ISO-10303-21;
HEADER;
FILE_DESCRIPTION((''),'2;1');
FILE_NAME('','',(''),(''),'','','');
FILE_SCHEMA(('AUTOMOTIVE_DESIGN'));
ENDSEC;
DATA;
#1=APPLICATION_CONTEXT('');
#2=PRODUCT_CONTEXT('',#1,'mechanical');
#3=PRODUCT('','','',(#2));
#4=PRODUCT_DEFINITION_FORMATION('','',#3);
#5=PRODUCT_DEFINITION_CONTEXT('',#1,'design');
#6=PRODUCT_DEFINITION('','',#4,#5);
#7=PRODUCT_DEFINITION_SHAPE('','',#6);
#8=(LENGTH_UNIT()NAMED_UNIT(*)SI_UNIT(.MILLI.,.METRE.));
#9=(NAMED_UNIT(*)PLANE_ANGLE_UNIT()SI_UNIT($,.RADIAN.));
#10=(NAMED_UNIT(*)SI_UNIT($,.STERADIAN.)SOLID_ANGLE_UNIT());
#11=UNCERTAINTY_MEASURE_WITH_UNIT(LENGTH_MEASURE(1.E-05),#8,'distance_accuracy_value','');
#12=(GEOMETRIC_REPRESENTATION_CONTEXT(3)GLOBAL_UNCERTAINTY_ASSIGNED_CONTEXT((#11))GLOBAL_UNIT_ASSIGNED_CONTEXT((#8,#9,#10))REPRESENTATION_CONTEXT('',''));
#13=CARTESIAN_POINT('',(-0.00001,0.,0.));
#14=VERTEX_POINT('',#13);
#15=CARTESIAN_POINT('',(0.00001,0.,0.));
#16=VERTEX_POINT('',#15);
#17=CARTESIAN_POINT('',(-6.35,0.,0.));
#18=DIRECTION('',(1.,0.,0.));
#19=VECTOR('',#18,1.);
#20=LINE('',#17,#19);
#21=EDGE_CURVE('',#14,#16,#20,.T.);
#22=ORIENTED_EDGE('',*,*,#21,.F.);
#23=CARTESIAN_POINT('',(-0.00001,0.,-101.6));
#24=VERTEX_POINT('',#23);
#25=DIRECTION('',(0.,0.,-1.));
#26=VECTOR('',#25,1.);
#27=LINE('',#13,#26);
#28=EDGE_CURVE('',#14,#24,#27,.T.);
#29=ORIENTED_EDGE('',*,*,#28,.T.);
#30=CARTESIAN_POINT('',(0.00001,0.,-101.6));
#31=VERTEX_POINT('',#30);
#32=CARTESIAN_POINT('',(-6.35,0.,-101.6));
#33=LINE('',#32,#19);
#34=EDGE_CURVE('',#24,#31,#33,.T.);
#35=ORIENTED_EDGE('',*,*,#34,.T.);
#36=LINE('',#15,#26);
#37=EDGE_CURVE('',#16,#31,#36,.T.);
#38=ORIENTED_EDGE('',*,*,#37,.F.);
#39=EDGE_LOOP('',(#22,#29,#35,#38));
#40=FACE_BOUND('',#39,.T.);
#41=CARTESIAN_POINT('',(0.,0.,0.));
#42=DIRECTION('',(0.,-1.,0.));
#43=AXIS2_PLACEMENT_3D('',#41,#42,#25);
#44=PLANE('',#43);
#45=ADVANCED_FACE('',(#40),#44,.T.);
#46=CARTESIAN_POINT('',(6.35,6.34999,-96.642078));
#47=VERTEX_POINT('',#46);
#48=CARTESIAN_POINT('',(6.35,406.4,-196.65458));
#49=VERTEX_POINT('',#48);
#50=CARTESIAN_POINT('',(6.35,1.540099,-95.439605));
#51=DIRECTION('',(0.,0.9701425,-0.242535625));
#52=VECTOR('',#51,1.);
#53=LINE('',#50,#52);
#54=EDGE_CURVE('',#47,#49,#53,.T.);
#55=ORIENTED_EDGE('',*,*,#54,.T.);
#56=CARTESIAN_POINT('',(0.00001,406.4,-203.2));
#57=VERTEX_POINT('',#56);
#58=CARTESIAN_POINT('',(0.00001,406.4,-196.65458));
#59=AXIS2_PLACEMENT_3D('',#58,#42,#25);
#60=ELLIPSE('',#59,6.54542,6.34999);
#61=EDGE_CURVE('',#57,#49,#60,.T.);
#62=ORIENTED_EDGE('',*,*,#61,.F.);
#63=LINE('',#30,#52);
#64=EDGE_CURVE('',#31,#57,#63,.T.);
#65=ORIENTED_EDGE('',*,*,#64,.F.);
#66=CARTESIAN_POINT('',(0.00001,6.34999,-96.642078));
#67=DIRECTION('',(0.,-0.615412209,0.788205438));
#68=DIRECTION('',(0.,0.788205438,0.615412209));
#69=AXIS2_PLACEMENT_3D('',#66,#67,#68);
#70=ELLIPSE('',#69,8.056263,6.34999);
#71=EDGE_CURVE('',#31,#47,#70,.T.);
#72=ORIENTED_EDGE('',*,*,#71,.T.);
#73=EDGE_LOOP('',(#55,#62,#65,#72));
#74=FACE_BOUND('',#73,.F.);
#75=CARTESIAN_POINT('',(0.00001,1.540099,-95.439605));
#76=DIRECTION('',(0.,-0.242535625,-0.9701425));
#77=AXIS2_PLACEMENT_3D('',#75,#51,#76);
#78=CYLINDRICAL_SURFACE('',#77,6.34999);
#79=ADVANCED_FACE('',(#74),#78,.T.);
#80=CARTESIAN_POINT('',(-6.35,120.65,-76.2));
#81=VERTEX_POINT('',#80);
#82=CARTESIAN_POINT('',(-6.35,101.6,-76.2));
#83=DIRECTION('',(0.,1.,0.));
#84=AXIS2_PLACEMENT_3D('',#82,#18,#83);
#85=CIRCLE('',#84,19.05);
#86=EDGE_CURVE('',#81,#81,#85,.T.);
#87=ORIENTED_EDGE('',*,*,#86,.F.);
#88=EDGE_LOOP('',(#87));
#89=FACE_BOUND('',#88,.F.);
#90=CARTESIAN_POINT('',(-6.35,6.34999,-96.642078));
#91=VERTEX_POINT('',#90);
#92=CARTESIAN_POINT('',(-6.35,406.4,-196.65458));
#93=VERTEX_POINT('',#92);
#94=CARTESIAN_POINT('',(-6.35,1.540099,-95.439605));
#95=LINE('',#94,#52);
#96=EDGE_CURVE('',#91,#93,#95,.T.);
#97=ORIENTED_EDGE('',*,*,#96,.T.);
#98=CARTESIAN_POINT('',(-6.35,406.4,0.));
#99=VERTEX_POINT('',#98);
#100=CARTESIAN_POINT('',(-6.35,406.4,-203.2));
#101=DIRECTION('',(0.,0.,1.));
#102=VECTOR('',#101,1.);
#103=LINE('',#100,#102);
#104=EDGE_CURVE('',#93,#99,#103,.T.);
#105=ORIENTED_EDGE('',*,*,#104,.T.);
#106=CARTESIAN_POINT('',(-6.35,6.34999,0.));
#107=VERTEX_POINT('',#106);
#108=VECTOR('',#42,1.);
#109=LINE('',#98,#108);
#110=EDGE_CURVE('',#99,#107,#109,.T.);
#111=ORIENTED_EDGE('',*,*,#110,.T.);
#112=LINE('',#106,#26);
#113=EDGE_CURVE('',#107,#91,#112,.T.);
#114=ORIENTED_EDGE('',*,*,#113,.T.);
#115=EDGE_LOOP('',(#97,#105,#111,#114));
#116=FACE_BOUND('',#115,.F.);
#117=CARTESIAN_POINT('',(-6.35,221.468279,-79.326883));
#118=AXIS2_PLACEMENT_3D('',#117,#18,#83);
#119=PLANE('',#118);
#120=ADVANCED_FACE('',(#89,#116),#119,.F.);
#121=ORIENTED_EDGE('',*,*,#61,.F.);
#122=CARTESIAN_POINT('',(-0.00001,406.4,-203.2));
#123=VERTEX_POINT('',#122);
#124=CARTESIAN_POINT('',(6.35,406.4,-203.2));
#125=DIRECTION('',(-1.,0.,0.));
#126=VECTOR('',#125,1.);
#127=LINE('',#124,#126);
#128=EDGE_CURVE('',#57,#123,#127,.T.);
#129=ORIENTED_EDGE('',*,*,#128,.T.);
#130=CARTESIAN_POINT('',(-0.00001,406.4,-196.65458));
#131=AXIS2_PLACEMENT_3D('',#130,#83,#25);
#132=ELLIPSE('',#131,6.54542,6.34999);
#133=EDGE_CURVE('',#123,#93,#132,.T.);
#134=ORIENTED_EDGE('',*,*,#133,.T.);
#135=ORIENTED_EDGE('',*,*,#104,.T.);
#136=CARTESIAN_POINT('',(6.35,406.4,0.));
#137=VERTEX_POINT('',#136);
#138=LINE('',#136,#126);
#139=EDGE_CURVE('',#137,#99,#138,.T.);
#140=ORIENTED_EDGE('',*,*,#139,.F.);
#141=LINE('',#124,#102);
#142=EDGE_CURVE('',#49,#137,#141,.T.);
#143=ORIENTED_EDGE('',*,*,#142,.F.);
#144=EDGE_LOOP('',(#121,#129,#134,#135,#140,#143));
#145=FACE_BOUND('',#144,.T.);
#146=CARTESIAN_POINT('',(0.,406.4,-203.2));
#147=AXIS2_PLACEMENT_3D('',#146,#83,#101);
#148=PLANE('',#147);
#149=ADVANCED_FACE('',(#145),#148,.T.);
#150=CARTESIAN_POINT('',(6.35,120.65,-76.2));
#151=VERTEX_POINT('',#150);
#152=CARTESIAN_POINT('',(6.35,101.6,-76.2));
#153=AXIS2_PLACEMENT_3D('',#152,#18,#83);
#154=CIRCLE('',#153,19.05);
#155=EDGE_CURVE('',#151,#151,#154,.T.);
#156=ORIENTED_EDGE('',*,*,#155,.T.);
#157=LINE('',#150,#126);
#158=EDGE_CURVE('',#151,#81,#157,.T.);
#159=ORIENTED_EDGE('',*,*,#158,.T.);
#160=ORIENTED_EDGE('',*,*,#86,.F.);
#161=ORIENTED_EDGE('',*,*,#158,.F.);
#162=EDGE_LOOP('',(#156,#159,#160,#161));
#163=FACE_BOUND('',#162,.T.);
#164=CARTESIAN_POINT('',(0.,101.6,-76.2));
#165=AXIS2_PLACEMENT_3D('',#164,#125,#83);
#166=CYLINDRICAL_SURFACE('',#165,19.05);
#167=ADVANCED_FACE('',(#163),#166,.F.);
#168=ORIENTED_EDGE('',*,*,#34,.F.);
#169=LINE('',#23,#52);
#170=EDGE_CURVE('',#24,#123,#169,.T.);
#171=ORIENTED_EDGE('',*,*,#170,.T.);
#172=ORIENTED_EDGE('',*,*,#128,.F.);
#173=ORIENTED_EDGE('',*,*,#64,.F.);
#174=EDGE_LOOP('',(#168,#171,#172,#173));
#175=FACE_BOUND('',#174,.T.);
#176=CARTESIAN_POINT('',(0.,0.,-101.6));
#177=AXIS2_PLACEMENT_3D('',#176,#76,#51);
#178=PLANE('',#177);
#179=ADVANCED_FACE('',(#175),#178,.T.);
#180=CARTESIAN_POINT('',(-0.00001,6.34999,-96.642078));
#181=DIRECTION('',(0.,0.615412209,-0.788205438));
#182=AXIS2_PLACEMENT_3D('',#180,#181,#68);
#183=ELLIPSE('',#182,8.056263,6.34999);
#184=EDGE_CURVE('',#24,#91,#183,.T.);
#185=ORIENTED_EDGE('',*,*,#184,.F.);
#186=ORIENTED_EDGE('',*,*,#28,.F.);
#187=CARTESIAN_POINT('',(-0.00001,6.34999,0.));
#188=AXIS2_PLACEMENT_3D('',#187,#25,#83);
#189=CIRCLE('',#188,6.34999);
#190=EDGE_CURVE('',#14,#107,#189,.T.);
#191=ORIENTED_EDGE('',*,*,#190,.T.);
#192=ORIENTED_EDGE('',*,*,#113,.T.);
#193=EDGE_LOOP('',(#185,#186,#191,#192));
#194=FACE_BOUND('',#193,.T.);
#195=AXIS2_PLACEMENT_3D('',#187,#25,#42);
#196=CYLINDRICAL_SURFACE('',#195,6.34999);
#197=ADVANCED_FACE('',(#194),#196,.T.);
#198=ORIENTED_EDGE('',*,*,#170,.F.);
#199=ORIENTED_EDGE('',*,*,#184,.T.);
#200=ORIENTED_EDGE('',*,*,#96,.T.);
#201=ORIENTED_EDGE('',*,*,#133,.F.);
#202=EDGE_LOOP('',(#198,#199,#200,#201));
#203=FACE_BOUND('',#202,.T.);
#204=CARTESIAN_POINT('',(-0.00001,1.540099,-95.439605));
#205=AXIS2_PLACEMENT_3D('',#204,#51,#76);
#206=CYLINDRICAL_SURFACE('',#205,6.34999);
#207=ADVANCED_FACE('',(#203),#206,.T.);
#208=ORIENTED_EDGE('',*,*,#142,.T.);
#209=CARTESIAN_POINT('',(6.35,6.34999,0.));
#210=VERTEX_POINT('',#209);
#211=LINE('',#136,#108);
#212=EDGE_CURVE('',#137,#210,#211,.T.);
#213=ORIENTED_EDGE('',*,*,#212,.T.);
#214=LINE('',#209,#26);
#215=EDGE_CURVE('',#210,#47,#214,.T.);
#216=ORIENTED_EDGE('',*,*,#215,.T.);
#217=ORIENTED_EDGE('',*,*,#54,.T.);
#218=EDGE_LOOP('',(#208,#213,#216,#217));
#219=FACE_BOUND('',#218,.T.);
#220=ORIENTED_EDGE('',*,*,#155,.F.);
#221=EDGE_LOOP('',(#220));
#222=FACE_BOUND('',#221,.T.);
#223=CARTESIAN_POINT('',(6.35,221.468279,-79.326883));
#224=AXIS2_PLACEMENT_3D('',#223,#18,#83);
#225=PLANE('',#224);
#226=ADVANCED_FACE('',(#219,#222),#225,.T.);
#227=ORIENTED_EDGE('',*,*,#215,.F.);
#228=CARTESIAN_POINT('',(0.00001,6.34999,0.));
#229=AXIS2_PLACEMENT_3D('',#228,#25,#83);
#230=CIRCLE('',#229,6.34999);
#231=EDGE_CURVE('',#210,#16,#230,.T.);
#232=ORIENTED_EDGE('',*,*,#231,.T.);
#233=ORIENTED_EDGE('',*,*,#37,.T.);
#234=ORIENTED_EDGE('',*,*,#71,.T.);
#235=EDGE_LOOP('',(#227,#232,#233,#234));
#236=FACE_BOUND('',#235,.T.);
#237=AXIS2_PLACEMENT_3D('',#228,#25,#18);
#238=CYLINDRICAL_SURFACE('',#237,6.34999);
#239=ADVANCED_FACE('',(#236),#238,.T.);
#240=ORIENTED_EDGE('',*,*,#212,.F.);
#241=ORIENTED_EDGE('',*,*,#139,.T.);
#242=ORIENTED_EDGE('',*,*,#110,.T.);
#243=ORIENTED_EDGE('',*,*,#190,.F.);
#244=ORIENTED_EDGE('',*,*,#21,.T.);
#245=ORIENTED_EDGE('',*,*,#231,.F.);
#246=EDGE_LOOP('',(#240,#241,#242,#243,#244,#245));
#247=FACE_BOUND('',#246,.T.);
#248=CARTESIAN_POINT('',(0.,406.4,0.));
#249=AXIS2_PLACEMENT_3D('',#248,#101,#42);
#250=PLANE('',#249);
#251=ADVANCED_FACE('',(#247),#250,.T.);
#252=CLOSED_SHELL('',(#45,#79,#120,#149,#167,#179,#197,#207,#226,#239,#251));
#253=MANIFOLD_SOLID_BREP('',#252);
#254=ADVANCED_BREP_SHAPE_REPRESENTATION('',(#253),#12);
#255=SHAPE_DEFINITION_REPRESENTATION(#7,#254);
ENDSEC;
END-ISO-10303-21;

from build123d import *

# Parameters (mm, degrees)
F0_R     = 19.05
F1_DEPTH = 6.35
F2_R     = 6.34999


# Not quite as in the source:
# - a fillet or chamfer is up to 0.001 mm smaller than in the source, because OpenCascade refuses the exact size


with BuildPart() as f1:
    # F0 (on Right) → F1 (new body, symmetric)
    with BuildSketch(Plane.YZ):
        Polygon((406.4, 0), (0, 0), (0, -101.6), (406.4, -203.2), align=None)
        with Locations((101.6, -76.2)):
            Circle(F0_R, mode=Mode.SUBTRACT)
    extrude(amount=F1_DEPTH, both=True)

    # F2 (radius 6.35 in the source; OpenCascade refuses exactly that, so slightly less here)
    f2_edges = [f1.edges().sort_by_distance(p)[0] for p in [
        (-6.35, 203.2, -152.4),
        (6.35, 203.2, -152.4),
        (6.35, 0, -50.8),
        (-6.35, 0, -50.8),
    ]]
    fillet(f2_edges, radius=F2_R)


solid = f1.part
